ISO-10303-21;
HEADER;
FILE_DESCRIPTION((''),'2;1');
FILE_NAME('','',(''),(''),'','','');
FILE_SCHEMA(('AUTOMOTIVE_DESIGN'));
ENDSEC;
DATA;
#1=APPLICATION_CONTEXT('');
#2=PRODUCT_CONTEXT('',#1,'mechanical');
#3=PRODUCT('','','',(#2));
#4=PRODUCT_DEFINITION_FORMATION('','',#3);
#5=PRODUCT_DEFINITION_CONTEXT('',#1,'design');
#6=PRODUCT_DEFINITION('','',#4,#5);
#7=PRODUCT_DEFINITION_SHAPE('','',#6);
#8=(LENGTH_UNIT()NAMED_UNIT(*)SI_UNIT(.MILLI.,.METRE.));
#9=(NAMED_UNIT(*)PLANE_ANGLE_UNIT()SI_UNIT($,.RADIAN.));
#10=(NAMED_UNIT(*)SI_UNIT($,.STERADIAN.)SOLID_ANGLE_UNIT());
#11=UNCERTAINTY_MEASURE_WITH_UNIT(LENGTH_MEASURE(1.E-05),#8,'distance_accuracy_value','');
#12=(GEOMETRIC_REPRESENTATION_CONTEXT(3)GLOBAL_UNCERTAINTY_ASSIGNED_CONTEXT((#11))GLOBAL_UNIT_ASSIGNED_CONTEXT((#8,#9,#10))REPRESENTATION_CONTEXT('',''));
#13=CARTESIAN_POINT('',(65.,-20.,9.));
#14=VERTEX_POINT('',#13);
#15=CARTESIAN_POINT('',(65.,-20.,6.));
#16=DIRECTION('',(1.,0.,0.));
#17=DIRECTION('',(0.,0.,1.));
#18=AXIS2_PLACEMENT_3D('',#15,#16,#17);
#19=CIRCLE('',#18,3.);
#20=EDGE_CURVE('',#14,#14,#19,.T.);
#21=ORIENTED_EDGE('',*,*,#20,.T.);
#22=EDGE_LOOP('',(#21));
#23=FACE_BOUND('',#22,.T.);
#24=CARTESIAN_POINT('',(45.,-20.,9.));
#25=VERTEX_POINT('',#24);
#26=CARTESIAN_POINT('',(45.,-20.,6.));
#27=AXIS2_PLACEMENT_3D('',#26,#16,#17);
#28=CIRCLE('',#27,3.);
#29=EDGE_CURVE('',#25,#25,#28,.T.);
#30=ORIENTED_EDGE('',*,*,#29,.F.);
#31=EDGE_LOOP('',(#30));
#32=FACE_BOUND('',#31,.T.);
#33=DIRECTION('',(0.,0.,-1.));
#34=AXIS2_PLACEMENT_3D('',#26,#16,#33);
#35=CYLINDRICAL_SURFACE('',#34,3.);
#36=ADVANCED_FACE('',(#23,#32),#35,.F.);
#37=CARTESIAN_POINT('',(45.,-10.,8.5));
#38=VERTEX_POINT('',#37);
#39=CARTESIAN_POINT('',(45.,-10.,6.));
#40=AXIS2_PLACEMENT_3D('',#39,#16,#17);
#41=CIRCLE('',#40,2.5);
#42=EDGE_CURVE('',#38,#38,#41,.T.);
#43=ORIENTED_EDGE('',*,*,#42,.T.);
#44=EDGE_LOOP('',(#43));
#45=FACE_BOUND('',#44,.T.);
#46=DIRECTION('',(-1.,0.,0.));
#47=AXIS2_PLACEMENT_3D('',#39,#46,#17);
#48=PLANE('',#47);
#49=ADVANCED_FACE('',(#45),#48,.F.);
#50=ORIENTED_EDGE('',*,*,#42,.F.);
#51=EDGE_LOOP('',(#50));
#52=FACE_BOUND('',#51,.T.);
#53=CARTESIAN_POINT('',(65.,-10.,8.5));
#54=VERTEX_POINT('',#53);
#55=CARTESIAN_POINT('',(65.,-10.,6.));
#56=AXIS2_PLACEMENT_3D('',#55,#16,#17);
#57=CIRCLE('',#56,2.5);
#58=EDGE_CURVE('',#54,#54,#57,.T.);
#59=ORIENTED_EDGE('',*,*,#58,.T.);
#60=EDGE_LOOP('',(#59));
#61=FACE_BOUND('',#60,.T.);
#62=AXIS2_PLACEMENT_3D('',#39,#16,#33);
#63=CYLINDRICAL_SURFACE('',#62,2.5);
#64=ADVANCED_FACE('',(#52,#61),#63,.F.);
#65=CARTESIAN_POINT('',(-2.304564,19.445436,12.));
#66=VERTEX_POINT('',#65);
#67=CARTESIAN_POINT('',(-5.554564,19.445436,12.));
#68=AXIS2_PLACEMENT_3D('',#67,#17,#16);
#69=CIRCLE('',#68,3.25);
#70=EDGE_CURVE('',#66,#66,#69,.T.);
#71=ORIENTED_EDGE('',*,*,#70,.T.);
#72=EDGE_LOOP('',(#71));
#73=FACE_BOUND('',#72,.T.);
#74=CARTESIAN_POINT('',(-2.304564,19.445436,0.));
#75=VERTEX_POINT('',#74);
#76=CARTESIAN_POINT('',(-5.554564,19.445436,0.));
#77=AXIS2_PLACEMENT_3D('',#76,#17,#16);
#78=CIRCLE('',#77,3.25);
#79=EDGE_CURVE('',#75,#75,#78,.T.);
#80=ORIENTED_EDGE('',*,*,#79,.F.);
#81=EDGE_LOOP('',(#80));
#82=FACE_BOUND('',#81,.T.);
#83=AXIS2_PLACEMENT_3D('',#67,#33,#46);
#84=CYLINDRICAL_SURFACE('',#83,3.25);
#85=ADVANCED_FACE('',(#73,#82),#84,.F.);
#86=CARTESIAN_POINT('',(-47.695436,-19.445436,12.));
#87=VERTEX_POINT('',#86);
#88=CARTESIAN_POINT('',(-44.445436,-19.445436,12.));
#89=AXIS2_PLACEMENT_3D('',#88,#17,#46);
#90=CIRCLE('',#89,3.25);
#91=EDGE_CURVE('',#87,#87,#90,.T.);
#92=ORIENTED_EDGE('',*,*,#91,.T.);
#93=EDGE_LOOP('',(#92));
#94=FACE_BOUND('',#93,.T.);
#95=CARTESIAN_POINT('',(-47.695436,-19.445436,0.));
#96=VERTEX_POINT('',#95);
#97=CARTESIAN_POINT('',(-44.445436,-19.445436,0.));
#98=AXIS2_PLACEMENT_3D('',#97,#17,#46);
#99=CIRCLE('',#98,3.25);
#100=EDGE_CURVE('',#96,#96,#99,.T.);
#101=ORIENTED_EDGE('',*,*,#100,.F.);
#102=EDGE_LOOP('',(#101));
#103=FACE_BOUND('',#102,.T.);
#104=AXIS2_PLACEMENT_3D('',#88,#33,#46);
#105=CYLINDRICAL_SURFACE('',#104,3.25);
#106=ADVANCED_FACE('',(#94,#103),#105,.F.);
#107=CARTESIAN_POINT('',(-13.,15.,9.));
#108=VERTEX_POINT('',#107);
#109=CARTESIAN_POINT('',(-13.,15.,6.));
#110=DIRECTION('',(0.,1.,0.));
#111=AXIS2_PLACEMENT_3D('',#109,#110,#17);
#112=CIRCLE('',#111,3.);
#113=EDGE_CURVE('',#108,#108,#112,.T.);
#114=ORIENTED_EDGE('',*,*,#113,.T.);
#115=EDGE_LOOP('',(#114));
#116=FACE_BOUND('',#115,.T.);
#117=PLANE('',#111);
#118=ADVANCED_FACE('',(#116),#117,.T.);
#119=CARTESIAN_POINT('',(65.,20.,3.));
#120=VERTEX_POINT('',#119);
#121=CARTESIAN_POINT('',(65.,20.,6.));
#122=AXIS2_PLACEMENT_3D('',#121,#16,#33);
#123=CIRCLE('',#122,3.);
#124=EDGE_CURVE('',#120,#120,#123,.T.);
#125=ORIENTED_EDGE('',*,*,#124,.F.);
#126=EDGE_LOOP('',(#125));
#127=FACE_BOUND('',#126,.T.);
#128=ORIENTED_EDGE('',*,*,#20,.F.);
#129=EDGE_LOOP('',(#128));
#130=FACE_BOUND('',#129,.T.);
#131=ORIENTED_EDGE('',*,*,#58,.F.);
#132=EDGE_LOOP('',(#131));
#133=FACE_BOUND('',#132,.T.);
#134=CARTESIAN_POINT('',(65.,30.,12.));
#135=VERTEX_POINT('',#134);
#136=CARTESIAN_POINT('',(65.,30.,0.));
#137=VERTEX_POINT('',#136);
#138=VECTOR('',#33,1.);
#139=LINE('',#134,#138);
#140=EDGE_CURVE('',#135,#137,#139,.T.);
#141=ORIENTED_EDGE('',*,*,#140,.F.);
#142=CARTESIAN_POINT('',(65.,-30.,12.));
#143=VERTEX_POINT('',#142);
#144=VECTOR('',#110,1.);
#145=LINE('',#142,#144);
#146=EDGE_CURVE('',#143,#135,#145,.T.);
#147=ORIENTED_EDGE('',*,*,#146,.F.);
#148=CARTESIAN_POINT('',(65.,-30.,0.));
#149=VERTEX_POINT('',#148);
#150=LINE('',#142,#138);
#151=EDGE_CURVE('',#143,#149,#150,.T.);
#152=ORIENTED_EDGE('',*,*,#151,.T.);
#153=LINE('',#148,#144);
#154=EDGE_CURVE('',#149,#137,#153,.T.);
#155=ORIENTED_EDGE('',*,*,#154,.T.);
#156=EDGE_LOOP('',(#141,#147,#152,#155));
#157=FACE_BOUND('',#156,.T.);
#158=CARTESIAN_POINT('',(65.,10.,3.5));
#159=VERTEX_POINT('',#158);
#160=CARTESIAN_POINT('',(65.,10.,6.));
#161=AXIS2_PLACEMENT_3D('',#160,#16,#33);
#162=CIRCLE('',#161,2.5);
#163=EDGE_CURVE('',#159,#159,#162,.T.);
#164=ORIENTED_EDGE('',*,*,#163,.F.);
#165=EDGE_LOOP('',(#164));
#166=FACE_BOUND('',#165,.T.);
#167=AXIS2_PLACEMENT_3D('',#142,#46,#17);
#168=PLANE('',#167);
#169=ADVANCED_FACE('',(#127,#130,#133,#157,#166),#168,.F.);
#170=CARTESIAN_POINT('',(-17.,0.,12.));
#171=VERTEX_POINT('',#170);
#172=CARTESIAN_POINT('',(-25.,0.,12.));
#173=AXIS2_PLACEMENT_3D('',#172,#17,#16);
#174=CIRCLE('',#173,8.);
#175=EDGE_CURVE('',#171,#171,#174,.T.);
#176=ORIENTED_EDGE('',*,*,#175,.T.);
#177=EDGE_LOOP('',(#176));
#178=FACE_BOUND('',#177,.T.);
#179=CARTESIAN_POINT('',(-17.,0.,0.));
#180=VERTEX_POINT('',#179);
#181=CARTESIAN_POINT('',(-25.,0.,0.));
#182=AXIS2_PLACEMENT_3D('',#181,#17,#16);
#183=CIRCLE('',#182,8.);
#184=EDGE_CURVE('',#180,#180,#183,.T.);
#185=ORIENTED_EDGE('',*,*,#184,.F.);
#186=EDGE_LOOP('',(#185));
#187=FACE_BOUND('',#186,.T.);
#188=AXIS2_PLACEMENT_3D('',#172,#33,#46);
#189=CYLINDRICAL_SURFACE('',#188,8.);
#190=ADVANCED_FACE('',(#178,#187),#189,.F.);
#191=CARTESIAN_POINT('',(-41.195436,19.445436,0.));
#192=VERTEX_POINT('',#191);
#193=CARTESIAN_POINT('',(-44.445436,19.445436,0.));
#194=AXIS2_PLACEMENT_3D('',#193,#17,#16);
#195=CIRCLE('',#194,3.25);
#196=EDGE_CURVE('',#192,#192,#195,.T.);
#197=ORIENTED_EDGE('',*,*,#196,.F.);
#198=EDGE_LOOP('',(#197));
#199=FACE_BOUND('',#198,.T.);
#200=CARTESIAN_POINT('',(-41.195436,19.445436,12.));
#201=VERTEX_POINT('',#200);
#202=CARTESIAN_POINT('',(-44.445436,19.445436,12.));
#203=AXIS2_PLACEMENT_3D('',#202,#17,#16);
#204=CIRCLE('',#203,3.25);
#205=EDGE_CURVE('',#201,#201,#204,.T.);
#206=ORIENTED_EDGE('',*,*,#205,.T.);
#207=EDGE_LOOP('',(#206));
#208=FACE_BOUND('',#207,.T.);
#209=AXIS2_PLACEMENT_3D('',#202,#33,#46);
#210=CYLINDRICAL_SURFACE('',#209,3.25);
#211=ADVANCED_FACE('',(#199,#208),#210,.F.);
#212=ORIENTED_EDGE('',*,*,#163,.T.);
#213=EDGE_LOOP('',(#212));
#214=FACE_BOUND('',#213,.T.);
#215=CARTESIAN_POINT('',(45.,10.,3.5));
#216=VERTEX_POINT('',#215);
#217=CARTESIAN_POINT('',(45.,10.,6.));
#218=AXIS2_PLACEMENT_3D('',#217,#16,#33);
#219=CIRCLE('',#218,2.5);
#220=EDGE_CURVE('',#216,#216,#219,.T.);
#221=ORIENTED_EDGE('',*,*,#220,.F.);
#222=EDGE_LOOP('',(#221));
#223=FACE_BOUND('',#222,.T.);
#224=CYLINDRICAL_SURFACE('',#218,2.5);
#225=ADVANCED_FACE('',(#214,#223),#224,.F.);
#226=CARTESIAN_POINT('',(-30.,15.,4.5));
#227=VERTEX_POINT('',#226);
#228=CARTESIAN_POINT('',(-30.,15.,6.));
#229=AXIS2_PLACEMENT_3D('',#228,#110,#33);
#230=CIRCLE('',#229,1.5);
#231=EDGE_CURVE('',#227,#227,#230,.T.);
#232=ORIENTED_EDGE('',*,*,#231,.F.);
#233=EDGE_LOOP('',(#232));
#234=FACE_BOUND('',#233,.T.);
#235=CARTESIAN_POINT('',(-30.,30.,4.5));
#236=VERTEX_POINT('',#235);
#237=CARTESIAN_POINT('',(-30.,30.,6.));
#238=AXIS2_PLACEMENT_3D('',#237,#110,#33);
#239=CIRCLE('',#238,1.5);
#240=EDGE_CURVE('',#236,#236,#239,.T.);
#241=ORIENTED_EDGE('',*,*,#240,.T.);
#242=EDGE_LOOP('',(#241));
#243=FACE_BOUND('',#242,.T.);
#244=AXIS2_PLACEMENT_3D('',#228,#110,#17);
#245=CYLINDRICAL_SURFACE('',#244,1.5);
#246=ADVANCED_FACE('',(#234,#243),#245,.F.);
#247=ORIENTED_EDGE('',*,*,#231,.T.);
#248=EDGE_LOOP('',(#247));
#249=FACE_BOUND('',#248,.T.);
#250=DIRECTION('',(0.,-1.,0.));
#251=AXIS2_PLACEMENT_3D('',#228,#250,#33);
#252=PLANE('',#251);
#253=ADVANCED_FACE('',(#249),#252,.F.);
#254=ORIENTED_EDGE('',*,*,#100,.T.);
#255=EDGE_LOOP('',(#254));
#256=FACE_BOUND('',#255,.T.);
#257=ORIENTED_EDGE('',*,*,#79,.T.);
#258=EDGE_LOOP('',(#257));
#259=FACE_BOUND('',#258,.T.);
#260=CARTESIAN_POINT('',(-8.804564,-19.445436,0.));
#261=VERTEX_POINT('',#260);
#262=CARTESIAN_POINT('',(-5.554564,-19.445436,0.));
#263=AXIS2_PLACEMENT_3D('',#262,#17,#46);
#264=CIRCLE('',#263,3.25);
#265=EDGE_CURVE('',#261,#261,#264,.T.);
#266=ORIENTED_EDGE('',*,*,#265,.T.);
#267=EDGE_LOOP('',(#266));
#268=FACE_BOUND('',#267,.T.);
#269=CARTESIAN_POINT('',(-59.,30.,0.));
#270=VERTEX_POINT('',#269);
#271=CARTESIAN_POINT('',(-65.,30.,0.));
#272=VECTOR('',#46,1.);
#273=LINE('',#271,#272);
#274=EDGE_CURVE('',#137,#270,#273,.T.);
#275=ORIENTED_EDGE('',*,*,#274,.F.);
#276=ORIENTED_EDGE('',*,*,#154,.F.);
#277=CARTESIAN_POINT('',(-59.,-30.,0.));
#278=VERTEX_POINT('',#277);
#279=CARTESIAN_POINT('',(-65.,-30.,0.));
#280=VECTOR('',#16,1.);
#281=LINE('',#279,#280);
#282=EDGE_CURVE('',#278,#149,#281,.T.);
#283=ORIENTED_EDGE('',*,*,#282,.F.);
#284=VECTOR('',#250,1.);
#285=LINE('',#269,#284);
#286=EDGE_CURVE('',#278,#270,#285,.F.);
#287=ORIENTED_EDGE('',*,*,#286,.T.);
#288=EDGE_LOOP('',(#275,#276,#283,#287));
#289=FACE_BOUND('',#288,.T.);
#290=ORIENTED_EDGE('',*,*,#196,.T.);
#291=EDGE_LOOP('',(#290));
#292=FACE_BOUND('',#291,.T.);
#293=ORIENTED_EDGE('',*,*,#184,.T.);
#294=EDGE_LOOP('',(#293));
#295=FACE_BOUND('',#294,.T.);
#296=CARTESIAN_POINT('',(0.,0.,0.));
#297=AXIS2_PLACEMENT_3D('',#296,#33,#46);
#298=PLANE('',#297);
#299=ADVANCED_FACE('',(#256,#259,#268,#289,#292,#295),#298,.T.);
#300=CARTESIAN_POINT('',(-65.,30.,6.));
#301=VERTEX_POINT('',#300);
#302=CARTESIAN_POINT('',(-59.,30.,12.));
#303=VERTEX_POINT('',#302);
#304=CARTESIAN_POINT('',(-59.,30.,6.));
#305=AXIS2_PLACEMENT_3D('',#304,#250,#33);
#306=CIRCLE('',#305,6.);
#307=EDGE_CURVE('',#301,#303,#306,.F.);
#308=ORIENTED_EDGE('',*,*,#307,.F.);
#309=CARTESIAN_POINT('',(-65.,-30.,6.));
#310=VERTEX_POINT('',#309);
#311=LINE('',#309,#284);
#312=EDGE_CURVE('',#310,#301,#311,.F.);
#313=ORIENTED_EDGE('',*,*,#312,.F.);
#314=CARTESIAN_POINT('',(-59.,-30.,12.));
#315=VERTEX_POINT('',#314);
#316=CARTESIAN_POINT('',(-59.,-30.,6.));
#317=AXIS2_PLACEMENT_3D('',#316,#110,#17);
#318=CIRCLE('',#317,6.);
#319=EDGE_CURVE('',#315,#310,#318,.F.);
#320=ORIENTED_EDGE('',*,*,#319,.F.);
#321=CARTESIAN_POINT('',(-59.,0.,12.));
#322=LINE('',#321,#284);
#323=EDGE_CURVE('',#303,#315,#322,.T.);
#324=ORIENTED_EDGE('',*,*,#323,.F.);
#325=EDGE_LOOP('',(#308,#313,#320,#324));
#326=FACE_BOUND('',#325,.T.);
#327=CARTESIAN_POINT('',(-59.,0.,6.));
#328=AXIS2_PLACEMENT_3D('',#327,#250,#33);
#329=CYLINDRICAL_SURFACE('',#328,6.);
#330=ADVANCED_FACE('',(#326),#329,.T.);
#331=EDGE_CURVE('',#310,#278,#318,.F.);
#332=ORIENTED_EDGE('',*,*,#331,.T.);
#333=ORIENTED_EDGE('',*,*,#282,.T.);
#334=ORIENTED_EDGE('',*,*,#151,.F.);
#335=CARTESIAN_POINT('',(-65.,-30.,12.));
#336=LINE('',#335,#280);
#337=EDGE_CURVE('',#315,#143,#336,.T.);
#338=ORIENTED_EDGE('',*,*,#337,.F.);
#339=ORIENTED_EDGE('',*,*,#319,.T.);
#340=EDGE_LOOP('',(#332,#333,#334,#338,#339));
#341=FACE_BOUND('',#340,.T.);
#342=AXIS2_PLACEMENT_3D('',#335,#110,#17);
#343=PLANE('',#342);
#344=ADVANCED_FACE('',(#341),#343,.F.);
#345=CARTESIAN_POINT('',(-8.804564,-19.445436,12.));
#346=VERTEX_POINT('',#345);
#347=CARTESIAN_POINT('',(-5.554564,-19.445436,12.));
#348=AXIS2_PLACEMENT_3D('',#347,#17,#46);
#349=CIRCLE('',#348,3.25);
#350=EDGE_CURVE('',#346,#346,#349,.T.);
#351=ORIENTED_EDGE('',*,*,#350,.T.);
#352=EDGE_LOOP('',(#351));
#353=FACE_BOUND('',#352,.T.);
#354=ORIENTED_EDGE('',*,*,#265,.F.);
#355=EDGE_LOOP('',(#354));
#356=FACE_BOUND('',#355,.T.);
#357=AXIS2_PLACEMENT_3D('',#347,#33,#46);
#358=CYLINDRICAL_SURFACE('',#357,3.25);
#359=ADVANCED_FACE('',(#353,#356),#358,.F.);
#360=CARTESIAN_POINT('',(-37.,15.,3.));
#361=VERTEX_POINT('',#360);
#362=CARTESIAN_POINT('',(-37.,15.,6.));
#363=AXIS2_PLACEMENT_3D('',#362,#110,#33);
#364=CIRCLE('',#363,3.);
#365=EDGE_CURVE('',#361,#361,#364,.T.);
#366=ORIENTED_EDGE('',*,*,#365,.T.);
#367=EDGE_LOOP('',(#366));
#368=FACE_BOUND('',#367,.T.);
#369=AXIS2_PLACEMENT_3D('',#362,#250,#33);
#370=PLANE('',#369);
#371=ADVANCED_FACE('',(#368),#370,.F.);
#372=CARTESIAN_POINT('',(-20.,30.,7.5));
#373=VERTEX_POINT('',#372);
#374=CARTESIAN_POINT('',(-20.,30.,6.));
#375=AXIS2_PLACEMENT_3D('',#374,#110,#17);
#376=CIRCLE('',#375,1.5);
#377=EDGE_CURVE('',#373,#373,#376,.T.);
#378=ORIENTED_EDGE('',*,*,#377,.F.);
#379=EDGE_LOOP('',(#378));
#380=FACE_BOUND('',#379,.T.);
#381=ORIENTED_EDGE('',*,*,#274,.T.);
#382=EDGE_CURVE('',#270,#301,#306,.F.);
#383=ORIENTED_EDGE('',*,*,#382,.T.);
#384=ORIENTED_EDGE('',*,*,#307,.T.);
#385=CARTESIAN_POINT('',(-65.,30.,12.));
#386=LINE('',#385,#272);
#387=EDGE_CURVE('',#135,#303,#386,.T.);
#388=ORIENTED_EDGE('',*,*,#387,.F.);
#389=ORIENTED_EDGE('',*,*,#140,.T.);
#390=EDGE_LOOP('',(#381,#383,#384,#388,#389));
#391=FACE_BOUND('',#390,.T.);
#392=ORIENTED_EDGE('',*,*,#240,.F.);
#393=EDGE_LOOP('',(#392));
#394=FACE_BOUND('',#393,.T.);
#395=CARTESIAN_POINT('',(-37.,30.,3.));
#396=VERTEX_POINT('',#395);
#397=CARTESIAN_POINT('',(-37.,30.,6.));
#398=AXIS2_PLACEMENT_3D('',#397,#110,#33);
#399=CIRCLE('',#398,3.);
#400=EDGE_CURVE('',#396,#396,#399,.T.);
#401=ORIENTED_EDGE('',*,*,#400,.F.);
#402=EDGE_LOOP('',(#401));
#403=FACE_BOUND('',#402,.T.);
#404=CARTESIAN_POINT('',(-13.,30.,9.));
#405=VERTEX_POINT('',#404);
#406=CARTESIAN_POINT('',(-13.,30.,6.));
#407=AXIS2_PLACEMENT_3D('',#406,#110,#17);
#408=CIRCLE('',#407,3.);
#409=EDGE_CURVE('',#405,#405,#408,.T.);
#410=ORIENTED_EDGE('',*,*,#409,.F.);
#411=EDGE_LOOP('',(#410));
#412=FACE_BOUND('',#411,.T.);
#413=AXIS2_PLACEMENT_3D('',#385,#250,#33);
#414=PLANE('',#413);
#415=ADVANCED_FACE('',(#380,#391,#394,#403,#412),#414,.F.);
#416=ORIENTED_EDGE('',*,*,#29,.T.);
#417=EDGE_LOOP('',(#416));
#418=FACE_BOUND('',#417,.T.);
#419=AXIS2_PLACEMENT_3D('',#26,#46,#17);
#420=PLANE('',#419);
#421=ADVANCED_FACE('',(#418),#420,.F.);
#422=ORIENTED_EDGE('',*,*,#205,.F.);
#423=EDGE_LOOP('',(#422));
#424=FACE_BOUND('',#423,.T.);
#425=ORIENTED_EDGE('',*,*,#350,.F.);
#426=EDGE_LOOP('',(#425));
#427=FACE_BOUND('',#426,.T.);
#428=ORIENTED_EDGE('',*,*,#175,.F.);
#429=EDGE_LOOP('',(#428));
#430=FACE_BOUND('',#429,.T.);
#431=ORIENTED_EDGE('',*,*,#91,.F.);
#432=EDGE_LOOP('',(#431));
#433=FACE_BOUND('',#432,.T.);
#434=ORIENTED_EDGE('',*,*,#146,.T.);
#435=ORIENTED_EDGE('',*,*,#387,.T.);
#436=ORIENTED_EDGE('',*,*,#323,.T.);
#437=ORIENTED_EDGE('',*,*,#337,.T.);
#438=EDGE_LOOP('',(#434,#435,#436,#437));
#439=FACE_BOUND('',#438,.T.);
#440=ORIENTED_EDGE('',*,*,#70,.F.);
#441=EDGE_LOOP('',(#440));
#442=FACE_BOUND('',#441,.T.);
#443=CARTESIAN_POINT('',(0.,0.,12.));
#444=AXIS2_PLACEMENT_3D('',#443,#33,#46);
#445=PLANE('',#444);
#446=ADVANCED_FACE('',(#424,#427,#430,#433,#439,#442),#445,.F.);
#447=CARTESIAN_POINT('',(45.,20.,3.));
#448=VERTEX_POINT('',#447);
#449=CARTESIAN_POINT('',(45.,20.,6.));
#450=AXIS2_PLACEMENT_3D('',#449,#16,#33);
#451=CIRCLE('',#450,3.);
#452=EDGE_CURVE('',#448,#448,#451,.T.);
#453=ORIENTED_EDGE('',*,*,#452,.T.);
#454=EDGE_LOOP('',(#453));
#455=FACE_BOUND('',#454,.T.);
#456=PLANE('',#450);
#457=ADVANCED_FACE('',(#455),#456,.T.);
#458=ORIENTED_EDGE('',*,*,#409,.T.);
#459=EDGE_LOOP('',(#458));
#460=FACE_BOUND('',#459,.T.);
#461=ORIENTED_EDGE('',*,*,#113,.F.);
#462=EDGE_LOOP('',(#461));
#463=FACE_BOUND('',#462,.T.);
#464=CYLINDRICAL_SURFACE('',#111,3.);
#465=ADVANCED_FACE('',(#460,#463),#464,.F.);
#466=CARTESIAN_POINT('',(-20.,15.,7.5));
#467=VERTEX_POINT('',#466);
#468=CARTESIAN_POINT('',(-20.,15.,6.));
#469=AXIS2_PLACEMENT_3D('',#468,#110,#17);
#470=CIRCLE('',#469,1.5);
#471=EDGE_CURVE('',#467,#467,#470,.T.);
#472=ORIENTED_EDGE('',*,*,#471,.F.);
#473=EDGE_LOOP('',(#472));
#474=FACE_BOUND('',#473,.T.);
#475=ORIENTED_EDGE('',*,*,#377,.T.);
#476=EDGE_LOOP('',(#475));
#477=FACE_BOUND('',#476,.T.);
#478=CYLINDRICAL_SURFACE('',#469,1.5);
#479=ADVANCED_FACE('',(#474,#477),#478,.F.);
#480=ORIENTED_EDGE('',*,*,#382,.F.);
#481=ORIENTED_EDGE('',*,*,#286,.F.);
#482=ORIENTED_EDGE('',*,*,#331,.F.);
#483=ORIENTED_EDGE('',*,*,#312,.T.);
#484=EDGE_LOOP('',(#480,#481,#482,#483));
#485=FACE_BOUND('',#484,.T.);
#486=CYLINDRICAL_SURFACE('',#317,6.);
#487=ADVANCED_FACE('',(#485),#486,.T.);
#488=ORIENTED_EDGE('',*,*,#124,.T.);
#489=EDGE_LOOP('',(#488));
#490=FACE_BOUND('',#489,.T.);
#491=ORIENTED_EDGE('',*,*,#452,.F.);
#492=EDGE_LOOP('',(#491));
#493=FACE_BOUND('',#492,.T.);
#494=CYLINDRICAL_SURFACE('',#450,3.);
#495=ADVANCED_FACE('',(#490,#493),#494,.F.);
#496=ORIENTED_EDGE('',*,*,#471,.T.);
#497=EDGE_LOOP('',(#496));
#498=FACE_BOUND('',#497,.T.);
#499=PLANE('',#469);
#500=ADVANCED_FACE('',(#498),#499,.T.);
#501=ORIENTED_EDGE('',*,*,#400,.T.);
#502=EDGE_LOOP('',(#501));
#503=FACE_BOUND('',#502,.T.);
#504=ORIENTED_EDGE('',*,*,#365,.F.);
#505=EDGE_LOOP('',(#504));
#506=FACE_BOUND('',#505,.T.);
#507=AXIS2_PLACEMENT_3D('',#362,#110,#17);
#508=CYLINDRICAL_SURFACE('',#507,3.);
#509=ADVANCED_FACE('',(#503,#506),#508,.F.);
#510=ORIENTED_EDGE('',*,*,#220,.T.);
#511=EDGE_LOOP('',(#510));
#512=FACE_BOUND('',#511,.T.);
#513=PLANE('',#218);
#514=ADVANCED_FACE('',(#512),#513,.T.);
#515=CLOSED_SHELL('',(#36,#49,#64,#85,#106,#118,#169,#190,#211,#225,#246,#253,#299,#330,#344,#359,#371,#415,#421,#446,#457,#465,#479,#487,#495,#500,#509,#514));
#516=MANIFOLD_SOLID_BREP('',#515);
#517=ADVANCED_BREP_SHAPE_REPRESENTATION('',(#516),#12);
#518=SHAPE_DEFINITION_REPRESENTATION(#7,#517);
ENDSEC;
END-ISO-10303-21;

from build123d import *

# Parameters (mm, degrees)
SKETCH1_W           = 130
SKETCH1_H           = 60
SKETCH1_R           = 8
SKETCH1_R_2         = 3.25
BOSS_EXTRUDE1_DEPTH = 12
FILLET1_R           = 6
SKETCH2_R           = 3
SKETCH2_R_2         = 2.5
CUT_EXTRUDE1_DEPTH  = 20
SKETCH3_R           = 3
SKETCH3_R_2         = 1.5
CUT_EXTRUDE2_DEPTH  = 15


with BuildPart() as part:
    # Sketch1 → Boss-Extrude1 (new body)
    with BuildSketch(Plane.XY):
        Rectangle(SKETCH1_W, SKETCH1_H)
        with Locations((-25, 0)):
            Circle(SKETCH1_R, mode=Mode.SUBTRACT)
        with Locations((-5.554563517, 19.445436483)):
            Circle(SKETCH1_R_2, mode=Mode.SUBTRACT)
        with Locations((-44.445436483, 19.445436483)):
            Circle(SKETCH1_R_2, mode=Mode.SUBTRACT)
        with Locations(Location((-44.445436483, -19.445436483, 0), (0, 0, 180))):
            Circle(SKETCH1_R_2, mode=Mode.SUBTRACT)
        with Locations(Location((-5.554563517, -19.445436483, 0), (0, 0, 180))):
            Circle(SKETCH1_R_2, mode=Mode.SUBTRACT)
    extrude(amount=BOSS_EXTRUDE1_DEPTH)

    # Fillet1
    fillet1_edges = [part.edges().sort_by_distance(p)[0] for p in [
        (-65, 0, 0),
        (-65, 0, 12),
    ]]
    fillet(fillet1_edges, radius=FILLET1_R - 0.0001)  # a hair under: the kernel refuses the full size

    # Sketch2 → Cut-Extrude1 (cut)
    with BuildSketch(Plane(origin=(65, 0, 0), x_dir=(0, 0, -1), z_dir=(1, 0, 0))):
        with Locations((-6, 20)):
            Circle(SKETCH2_R)
        with Locations((-6, 10)):
            Circle(SKETCH2_R_2)
        with Locations(Location((-6, -10, 0), (0, 0, 180))):
            Circle(SKETCH2_R_2)
        with Locations(Location((-6, -20, 0), (0, 0, 180))):
            Circle(SKETCH2_R)
    extrude(amount=-CUT_EXTRUDE1_DEPTH, mode=Mode.SUBTRACT)

    # Sketch3 → Cut-Extrude2 (cut)
    with BuildSketch(Plane(origin=(0, 30, 0), x_dir=(1, 0, 0), z_dir=(0, 1, 0))):
        with Locations(Location((-13, -6, 0), (0, 0, 270))):
            Circle(SKETCH3_R)
        with Locations(Location((-20, -6, 0), (0, 0, 270))):
            Circle(SKETCH3_R_2)
        with Locations(Location((-30, -6, 0), (0, 0, 90))):
            Circle(SKETCH3_R_2)
        with Locations(Location((-37, -6, 0), (0, 0, 90))):
            Circle(SKETCH3_R)
    extrude(amount=-CUT_EXTRUDE2_DEPTH, mode=Mode.SUBTRACT)


solid = part.part
